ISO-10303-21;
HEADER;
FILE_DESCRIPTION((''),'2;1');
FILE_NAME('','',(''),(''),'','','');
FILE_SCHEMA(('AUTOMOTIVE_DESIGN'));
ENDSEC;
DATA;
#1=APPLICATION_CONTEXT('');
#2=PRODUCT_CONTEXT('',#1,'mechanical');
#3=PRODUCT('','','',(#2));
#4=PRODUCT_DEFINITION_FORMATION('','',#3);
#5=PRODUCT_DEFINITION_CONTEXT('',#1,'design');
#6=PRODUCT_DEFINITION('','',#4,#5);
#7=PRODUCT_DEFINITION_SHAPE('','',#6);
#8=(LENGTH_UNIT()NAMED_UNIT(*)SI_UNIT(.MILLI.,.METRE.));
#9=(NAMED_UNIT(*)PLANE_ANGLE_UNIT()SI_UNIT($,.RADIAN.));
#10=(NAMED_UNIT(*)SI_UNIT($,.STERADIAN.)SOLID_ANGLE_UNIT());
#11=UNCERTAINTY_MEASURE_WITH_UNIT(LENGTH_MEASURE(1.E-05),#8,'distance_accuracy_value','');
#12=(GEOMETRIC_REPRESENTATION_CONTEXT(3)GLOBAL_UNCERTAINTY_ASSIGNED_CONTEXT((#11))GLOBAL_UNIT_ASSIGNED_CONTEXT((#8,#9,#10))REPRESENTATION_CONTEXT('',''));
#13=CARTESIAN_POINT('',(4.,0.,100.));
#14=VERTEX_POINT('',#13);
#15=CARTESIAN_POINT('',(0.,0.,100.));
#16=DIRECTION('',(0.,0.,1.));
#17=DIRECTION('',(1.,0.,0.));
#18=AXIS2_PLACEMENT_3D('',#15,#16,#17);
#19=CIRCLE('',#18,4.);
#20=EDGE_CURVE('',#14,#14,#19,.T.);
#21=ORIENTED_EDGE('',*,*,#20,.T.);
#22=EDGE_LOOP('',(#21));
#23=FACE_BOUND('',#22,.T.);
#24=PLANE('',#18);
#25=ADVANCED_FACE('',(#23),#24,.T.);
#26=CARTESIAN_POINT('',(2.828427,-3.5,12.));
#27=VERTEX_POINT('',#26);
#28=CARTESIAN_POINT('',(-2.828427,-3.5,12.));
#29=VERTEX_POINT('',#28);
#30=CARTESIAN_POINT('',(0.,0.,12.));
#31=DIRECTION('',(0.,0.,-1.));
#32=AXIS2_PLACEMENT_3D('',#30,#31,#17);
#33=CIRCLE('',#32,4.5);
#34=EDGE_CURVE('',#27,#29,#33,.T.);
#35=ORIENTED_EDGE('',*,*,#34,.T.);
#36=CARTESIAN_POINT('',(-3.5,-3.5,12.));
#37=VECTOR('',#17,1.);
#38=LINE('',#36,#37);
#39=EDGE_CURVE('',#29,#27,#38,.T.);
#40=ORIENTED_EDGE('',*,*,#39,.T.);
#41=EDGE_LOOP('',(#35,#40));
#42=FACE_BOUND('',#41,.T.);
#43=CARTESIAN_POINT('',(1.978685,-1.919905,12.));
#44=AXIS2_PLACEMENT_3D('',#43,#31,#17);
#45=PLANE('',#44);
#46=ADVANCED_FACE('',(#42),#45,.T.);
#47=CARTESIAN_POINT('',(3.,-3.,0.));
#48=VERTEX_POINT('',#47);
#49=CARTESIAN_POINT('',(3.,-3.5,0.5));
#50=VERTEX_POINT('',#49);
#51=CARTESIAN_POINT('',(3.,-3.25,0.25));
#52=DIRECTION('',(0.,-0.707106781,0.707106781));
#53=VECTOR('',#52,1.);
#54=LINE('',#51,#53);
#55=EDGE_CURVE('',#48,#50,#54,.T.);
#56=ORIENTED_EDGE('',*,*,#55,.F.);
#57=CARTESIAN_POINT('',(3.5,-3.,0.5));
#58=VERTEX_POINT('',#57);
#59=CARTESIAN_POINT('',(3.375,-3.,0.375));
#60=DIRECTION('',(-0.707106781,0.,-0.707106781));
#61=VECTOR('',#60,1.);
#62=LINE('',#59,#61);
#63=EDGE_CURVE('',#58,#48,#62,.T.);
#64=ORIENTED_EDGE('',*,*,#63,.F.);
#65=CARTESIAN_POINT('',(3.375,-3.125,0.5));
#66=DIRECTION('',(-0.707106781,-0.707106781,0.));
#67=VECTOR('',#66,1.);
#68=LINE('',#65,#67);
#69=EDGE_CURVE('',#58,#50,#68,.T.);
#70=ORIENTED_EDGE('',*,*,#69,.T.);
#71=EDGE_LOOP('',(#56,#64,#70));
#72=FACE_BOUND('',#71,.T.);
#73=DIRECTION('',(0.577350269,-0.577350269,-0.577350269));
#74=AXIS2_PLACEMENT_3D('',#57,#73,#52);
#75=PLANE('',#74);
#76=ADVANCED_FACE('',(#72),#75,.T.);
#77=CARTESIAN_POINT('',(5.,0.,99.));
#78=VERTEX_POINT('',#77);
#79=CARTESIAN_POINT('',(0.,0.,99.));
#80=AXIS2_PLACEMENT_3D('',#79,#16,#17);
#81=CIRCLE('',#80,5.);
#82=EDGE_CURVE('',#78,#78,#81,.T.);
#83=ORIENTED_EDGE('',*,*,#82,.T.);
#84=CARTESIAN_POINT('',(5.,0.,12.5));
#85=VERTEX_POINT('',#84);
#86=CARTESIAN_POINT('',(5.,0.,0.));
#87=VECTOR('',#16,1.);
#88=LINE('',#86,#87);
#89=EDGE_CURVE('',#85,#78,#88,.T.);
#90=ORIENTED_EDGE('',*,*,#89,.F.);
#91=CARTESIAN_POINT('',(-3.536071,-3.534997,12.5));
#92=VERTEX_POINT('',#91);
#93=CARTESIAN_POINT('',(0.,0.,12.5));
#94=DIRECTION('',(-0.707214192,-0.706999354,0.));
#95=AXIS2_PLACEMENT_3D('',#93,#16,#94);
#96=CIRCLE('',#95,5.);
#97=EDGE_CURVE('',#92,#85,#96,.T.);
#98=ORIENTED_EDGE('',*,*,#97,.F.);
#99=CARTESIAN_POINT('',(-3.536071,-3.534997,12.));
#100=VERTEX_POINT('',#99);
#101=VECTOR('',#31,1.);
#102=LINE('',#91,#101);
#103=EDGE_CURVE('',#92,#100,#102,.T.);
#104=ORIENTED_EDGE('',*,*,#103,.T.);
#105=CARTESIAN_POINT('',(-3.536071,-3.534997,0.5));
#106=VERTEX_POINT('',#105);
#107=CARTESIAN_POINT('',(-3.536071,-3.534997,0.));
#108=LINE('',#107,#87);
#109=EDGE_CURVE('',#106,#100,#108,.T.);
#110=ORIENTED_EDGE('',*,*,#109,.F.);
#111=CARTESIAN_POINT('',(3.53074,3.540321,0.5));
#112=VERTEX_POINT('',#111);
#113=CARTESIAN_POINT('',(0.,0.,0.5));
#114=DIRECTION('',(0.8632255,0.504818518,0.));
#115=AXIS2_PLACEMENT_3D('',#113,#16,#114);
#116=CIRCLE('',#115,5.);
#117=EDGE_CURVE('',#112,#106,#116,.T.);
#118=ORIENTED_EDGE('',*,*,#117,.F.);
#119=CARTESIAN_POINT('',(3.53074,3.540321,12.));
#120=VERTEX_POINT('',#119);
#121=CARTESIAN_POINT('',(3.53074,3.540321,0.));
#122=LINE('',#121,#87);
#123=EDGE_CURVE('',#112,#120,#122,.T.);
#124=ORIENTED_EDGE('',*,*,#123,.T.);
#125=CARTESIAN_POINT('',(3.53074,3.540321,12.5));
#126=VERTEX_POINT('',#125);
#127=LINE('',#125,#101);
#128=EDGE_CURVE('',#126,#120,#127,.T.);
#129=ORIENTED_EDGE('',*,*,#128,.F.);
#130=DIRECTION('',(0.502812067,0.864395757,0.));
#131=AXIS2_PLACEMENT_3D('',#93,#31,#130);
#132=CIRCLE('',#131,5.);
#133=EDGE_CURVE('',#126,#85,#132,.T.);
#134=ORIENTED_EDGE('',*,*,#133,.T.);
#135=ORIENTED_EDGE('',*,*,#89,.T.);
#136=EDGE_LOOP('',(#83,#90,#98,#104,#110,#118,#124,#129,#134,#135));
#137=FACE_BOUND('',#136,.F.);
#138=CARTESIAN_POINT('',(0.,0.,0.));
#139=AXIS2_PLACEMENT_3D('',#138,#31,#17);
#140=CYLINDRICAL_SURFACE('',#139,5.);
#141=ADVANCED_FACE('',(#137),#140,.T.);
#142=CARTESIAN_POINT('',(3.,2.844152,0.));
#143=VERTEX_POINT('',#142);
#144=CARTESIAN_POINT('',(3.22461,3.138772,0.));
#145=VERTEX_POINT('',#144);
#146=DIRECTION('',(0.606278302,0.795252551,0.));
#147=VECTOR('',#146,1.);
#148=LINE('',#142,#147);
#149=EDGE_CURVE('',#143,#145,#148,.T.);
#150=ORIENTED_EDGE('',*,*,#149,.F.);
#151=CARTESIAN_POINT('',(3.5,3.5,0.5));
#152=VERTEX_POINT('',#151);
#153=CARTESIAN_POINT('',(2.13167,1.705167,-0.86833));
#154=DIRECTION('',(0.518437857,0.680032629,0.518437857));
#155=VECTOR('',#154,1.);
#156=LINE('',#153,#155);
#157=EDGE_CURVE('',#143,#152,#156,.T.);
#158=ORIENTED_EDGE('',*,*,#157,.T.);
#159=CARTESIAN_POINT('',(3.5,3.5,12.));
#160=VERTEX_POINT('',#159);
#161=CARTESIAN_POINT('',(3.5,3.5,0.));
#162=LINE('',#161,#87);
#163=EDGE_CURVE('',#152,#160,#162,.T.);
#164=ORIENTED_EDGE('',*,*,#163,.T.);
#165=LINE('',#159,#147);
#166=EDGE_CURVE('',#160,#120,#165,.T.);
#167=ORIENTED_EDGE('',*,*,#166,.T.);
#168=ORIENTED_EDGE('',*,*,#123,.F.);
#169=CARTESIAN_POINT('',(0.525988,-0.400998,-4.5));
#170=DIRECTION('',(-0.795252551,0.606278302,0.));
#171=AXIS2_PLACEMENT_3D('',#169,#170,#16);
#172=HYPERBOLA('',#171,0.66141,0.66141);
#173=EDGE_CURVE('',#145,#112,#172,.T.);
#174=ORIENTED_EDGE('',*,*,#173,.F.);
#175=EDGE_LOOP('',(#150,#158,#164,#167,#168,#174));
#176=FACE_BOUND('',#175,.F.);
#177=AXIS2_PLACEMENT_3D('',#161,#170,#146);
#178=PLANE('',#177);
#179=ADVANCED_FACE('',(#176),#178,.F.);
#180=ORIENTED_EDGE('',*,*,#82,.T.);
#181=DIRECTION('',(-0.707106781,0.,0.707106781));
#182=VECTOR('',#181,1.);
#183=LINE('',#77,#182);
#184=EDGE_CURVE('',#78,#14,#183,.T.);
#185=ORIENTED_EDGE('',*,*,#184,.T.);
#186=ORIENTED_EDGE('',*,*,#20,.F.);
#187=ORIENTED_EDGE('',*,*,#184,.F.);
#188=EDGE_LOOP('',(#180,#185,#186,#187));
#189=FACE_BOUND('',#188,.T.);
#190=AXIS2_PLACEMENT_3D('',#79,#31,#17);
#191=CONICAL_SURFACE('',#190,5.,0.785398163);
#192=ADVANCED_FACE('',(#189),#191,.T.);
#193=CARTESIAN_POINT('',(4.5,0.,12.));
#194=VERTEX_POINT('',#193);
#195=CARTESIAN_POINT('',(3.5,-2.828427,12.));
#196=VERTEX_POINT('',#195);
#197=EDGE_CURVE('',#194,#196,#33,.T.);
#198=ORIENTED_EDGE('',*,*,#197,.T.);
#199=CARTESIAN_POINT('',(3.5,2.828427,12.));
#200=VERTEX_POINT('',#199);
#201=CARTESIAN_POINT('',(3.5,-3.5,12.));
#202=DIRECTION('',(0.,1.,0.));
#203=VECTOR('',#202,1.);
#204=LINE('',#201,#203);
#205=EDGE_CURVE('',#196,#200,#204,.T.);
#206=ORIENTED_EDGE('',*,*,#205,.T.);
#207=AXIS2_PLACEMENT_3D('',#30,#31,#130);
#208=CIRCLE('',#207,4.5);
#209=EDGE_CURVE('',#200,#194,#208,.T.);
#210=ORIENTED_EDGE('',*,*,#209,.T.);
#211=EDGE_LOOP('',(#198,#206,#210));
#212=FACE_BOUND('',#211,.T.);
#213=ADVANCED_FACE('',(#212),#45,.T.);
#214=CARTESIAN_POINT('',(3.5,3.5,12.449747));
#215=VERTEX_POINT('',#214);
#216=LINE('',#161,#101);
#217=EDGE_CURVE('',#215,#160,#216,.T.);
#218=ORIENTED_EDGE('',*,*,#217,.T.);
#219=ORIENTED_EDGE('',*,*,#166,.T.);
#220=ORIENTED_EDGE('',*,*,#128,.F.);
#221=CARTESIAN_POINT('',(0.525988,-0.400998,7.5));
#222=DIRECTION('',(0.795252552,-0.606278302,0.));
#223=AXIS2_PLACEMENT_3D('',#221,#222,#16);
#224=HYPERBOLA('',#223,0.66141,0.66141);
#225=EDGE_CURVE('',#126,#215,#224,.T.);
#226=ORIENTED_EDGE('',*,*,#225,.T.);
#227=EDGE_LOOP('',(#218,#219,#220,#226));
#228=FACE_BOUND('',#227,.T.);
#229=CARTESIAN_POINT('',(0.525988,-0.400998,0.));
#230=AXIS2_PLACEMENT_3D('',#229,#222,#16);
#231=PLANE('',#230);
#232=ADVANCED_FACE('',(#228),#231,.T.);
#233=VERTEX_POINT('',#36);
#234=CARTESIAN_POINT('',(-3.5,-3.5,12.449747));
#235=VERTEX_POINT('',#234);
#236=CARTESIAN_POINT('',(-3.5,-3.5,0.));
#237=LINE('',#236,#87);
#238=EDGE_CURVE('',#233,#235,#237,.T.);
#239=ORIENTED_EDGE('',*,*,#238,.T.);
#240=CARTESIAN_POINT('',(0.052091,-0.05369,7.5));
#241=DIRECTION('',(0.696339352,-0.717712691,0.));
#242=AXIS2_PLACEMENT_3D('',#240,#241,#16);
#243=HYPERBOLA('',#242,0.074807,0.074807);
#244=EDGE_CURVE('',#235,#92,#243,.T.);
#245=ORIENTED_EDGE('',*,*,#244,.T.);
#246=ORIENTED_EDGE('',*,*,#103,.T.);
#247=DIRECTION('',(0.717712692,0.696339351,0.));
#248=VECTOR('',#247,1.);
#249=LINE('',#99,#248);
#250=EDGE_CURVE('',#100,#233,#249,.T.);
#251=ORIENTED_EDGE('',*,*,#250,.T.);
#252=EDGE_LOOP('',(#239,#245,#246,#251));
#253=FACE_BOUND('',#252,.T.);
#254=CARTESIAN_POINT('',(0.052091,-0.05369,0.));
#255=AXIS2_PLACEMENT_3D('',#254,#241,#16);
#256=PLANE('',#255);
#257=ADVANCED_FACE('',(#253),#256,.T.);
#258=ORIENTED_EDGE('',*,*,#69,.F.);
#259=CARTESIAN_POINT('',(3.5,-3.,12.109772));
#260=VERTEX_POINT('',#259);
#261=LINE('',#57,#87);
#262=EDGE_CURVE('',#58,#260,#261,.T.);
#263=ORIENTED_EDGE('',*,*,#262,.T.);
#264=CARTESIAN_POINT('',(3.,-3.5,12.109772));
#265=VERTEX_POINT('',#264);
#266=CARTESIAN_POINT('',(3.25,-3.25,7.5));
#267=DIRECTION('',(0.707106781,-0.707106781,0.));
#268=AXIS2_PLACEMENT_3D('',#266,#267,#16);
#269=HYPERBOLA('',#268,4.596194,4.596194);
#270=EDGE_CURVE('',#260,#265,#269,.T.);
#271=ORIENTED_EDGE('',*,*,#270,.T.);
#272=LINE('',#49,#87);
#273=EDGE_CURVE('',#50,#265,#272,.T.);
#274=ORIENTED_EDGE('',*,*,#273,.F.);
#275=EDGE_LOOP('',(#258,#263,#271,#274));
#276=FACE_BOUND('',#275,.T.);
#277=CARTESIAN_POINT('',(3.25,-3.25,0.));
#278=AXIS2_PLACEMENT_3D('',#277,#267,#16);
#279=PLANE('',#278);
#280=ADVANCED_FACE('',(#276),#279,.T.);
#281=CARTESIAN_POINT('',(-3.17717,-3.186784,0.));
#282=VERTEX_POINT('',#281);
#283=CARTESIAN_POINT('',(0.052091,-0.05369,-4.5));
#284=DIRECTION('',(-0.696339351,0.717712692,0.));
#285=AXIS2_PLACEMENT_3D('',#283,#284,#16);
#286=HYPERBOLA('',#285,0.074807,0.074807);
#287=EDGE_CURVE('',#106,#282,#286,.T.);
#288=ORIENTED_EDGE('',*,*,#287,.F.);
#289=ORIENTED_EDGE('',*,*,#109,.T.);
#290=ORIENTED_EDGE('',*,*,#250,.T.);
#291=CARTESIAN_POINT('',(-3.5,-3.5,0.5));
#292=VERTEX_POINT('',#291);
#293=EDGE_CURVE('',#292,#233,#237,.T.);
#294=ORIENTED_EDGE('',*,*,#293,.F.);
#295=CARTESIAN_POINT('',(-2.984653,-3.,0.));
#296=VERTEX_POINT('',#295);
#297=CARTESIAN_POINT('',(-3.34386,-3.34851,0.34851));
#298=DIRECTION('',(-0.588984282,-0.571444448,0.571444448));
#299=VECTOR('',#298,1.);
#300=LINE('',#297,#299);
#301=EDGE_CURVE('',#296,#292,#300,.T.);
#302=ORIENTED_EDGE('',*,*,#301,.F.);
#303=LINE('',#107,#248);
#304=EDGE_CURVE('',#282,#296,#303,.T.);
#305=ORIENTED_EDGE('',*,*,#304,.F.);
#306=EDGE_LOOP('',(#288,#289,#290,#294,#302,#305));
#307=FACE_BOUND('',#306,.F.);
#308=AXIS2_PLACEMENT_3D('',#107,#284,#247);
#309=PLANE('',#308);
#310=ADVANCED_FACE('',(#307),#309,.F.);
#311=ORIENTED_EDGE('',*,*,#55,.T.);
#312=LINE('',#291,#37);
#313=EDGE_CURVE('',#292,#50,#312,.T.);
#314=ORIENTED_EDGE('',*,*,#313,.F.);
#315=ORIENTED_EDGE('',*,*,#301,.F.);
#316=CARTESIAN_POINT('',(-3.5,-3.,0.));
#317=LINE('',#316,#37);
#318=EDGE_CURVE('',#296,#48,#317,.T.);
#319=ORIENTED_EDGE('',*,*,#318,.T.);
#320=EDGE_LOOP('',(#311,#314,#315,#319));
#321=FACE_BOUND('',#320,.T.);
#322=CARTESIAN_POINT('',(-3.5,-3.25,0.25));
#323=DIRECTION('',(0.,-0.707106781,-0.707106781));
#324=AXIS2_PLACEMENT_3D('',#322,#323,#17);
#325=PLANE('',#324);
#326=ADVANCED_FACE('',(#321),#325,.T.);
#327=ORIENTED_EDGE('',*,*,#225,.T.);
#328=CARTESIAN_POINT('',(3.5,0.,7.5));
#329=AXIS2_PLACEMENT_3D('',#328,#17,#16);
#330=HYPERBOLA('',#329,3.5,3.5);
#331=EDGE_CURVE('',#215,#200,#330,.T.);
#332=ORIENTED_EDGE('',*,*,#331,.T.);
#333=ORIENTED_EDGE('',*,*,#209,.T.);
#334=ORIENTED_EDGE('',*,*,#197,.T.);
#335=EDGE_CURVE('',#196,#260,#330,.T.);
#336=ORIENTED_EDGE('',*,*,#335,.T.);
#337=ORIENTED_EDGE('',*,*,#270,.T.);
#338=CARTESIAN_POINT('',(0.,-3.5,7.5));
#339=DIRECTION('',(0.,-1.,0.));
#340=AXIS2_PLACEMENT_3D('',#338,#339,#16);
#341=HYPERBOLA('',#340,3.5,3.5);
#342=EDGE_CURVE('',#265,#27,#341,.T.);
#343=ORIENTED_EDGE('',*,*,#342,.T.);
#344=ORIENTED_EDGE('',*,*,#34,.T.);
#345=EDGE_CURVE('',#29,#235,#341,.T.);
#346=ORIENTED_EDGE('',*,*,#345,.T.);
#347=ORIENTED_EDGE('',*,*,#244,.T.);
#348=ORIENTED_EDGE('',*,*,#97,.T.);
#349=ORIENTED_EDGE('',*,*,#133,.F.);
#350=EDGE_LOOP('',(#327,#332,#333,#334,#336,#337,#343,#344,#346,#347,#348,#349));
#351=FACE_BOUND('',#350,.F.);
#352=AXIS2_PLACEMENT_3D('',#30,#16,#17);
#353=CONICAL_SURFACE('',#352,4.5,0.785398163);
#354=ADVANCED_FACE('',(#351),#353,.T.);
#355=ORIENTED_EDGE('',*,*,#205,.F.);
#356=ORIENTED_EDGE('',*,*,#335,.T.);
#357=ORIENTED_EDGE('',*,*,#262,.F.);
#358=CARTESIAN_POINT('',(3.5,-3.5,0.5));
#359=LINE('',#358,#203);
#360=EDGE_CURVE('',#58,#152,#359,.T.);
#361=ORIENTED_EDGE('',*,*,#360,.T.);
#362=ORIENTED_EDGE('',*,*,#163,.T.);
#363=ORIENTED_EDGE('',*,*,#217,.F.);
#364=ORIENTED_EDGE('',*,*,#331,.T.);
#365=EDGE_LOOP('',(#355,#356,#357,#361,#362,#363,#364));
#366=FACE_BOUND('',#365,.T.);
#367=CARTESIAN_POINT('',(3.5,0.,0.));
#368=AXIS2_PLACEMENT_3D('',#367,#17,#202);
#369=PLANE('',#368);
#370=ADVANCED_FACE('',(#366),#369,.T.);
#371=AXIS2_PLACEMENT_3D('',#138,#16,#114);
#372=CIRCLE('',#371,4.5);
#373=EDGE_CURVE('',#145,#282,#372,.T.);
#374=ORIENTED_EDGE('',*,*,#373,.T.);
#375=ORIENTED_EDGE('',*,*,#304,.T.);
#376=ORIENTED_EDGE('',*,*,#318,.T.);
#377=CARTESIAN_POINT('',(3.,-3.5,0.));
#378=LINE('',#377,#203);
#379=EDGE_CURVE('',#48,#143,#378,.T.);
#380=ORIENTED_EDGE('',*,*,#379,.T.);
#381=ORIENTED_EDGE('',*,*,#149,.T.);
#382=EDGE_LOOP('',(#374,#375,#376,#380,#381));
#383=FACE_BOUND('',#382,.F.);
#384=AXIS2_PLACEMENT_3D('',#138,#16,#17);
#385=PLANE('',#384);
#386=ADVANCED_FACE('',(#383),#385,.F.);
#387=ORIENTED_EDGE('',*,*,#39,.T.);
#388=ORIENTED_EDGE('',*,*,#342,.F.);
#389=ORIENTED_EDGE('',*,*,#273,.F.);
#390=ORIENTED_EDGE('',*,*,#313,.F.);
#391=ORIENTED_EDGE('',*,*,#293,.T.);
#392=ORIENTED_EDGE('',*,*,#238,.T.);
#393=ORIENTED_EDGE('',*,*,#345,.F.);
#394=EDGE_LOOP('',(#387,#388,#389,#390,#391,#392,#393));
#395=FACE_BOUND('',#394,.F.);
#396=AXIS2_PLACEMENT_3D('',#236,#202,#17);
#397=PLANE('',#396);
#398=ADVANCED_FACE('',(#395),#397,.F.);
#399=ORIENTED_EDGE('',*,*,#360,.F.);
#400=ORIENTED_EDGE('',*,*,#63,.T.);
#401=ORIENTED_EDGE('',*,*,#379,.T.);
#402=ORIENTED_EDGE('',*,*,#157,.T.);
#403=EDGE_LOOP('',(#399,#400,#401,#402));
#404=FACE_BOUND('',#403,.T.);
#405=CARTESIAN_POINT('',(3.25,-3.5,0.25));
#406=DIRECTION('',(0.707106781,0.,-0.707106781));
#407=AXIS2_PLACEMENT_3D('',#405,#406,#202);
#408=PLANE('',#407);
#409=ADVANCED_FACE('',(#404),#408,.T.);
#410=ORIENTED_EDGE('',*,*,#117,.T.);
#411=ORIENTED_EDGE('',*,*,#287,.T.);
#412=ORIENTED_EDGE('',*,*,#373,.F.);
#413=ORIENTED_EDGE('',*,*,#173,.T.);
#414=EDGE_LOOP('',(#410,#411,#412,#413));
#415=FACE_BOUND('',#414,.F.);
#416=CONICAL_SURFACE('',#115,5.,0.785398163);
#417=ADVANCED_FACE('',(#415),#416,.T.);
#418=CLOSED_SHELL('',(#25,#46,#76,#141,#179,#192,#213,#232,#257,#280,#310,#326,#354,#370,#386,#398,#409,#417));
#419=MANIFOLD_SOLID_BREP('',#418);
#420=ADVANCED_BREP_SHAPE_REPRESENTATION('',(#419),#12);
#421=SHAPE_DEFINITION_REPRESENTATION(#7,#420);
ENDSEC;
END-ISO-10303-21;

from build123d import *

# Parameters (mm, degrees)
F0_R         = 5
F1_DEPTH     = 100
F3_DEPTH     = 12
F4_SIZE      = 1
F5_SIZE      = 0.5
F6_T2_ANGLE  = 209.430321651
F6_T6_ANGLE  = 59.8137801049
F6_T12_ANGLE = 149.7566863334
F6_T18_ANGLE = 149.7566863334
F6_T25_ANGLE = 149.7566863334
F6_T31_ANGLE = 149.7566863334
F6_T38_ANGLE = 149.7566863334
F6_T45_ANGLE = 149.7566863334


# Not quite as in the source:
# - a fillet or chamfer that OpenCascade refuses, or shapes differently, is made with other operations: its cross-section is extruded or revolved along the edge and cut away or added


with BuildPart() as f1:
    # F0 (on Top) → F1 (new body)
    with BuildSketch(Plane.XY):
        Circle(F0_R)
    extrude(amount=F1_DEPTH)

    # F2 (on face) → F3 (cut)
    with BuildSketch(Plane(origin=(0, 0, 0), x_dir=(1, 0, 0), z_dir=(0, 0, -1))):
        with BuildLine():
            Line((-3.5, 3.5), (3.5, 3.5))
            Line((3.5, 3.5), (3.5, -3.5))
            Line((3.5, -3.5), (3.5307399131, -3.5403214072))
            ThreePointArc((3.5307399131, -3.5403214072), (4.6181002352, -1.9165464297), (5, 0))
            ThreePointArc((5, 0), (1.9130662834, 4.6195429855), (-3.5360709581, 3.5349967722))
            Line((-3.5360709581, 3.5349967722), (-3.5, 3.5))
        make_face()
    extrude(amount=-F3_DEPTH, mode=Mode.SUBTRACT)

    # F4
    f4_edges = [f1.edges().sort_by_distance(p)[0] for p in [
        (-5, 0, 100),
    ]]
    chamfer(f4_edges, length=F4_SIZE)

    # F5
    f5_edges = [f1.edges().sort_by_distance(p)[0] for p in [
        (0, -3.5, 0),
        (3.5, 0, 0),
        (3.5, -3.5, 6),
    ]]
    chamfer(f5_edges, length=F5_SIZE)

    # F6: chamfer of 0.5 on 3 edges, made by hand

    # F6_s1 → F6_t2 (revolve, cut)
    with BuildSketch(Plane(origin=(0, 0, 0), x_dir=(0, 0, 1), z_dir=(0.5048185175, -0.8632255003, 0))):
        Polygon((0.5, -5), (0, -4.5), (0, -5), align=None)
    revolve(axis=Axis((0, 0, 0), (0, 0, 1)), revolution_arc=F6_T2_ANGLE, mode=Mode.SUBTRACT)


with BuildPart() as f6_tool4:
    # F6_s5 → F6_t6 (revolve)
    with BuildSketch(Plane(origin=(0, 0, 0), x_dir=(0, 0, 1), z_dir=(-0.8643957574, 0.5028120669, 0))):
        Polygon((12, 4.5), (12.5, 5), (12, 5), align=None)
    revolve(axis=Axis((0, 0, 12), (0, 0, -1)), revolution_arc=F6_T6_ANGLE)

    split(bisect_by=Plane.YZ.offset(3.5), keep=Keep.TOP)

    split(bisect_by=Plane(origin=(0.5259878903, -0.4009984555, 0), x_dir=(0, 0, 1), z_dir=(0.7952525516, -0.6062783018, 0)), keep=Keep.TOP)


with BuildPart() as f1_1:
    add(f1.part)

    # F6_t3: cut F6_tool4
    add(f6_tool4.part, mode=Mode.SUBTRACT)


with BuildPart() as f6_tool10:
    # F6_s11 → F6_t12 (revolve)
    with BuildSketch(Plane.XZ):
        Polygon((4.5, 12), (5, 12.5), (5, 12), align=None)
    revolve(axis=Axis((0, 0, 12), (0, 0, -1)), revolution_arc=F6_T12_ANGLE)

    split(bisect_by=Plane(origin=(3.25, -3.25, 0), x_dir=(0, 0, 1), z_dir=(-0.7071067812, 0.7071067812, 0)), keep=Keep.TOP)

    split(bisect_by=Plane.YZ.offset(3.5), keep=Keep.TOP)


with BuildPart() as f1_2:
    add(f1_1.part)

    # F6_t9: cut F6_tool10
    add(f6_tool10.part, mode=Mode.SUBTRACT)


with BuildPart() as f6_tool16:
    # F6_s17 → F6_t18 (revolve)
    with BuildSketch(Plane.XZ):
        Polygon((4.5, 12), (5, 12.5), (5, 12), align=None)
    revolve(axis=Axis((0, 0, 12), (0, 0, -1)), revolution_arc=F6_T18_ANGLE)

    split(bisect_by=Plane.XZ.offset(3.5), keep=Keep.BOTTOM)

    split(bisect_by=Plane(origin=(3.25, -3.25, 0), x_dir=(0, 0, 1), z_dir=(0.7071067812, -0.7071067812, 0)), keep=Keep.TOP)

    split(bisect_by=Plane.YZ.offset(3.5), keep=Keep.TOP)


with BuildPart() as f1_3:
    add(f1_2.part)

    # F6_t15: cut F6_tool16
    add(f6_tool16.part, mode=Mode.SUBTRACT)


with BuildPart() as f6_tool23:
    # F6_s24 → F6_t25 (revolve)
    with BuildSketch(Plane.XZ):
        Polygon((4.5, 12), (5, 12.5), (5, 12), align=None)
    revolve(axis=Axis((0, 0, 12), (0, 0, -1)), revolution_arc=F6_T25_ANGLE)

    split(bisect_by=Plane.XZ.offset(3.5), keep=Keep.TOP)

    split(bisect_by=Plane.YZ.offset(3.5), keep=Keep.TOP)


with BuildPart() as f1_4:
    add(f1_3.part)

    # F6_t22: cut F6_tool23
    add(f6_tool23.part, mode=Mode.SUBTRACT)


with BuildPart() as f6_tool29:
    # F6_s30 → F6_t31 (revolve)
    with BuildSketch(Plane.XZ):
        Polygon((4.5, 12), (5, 12.5), (5, 12), align=None)
    revolve(axis=Axis((0, 0, 12), (0, 0, -1)), revolution_arc=F6_T31_ANGLE)

    split(bisect_by=Plane.XZ.offset(3.5), keep=Keep.BOTTOM)

    split(bisect_by=Plane(origin=(3.25, -3.25, 0), x_dir=(0, 0, 1), z_dir=(0.7071067812, -0.7071067812, 0)), keep=Keep.TOP)

    split(bisect_by=Plane.YZ.offset(3.5), keep=Keep.BOTTOM)


with BuildPart() as f1_5:
    add(f1_4.part)

    # F6_t28: cut F6_tool29
    add(f6_tool29.part, mode=Mode.SUBTRACT)


with BuildPart() as f6_tool36:
    # F6_s37 → F6_t38 (revolve)
    with BuildSketch(Plane.XZ):
        Polygon((4.5, 12), (5, 12.5), (5, 12), align=None)
    revolve(axis=Axis((0, 0, 12), (0, 0, -1)), revolution_arc=F6_T38_ANGLE)

    split(bisect_by=Plane.XZ.offset(3.5), keep=Keep.TOP)

    split(bisect_by=Plane(origin=(3.25, -3.25, 0), x_dir=(0, 0, 1), z_dir=(-0.7071067812, 0.7071067812, 0)), keep=Keep.TOP)

    split(bisect_by=Plane(origin=(0.0520908408, -0.0536897095, 0), x_dir=(0, 0, 1), z_dir=(0.6963393518, -0.7177126913, 0)), keep=Keep.TOP)


with BuildPart() as f1_6:
    add(f1_5.part)

    # F6_t35: cut F6_tool36
    add(f6_tool36.part, mode=Mode.SUBTRACT)


with BuildPart() as f6_tool43:
    # F6_s44 → F6_t45 (revolve)
    with BuildSketch(Plane.XZ):
        Polygon((4.5, 12), (5, 12.5), (5, 12), align=None)
    revolve(axis=Axis((0, 0, 12), (0, 0, -1)), revolution_arc=F6_T45_ANGLE)

    split(bisect_by=Plane.XZ.offset(3.5), keep=Keep.TOP)

    split(bisect_by=Plane(origin=(3.25, -3.25, 0), x_dir=(0, 0, 1), z_dir=(0.7071067812, -0.7071067812, 0)), keep=Keep.TOP)

    split(bisect_by=Plane.YZ.offset(3.5), keep=Keep.BOTTOM)


with BuildPart() as f1_7:
    add(f1_6.part)

    # F6_t42: cut F6_tool43
    add(f6_tool43.part, mode=Mode.SUBTRACT)


solid = f1_7.part
